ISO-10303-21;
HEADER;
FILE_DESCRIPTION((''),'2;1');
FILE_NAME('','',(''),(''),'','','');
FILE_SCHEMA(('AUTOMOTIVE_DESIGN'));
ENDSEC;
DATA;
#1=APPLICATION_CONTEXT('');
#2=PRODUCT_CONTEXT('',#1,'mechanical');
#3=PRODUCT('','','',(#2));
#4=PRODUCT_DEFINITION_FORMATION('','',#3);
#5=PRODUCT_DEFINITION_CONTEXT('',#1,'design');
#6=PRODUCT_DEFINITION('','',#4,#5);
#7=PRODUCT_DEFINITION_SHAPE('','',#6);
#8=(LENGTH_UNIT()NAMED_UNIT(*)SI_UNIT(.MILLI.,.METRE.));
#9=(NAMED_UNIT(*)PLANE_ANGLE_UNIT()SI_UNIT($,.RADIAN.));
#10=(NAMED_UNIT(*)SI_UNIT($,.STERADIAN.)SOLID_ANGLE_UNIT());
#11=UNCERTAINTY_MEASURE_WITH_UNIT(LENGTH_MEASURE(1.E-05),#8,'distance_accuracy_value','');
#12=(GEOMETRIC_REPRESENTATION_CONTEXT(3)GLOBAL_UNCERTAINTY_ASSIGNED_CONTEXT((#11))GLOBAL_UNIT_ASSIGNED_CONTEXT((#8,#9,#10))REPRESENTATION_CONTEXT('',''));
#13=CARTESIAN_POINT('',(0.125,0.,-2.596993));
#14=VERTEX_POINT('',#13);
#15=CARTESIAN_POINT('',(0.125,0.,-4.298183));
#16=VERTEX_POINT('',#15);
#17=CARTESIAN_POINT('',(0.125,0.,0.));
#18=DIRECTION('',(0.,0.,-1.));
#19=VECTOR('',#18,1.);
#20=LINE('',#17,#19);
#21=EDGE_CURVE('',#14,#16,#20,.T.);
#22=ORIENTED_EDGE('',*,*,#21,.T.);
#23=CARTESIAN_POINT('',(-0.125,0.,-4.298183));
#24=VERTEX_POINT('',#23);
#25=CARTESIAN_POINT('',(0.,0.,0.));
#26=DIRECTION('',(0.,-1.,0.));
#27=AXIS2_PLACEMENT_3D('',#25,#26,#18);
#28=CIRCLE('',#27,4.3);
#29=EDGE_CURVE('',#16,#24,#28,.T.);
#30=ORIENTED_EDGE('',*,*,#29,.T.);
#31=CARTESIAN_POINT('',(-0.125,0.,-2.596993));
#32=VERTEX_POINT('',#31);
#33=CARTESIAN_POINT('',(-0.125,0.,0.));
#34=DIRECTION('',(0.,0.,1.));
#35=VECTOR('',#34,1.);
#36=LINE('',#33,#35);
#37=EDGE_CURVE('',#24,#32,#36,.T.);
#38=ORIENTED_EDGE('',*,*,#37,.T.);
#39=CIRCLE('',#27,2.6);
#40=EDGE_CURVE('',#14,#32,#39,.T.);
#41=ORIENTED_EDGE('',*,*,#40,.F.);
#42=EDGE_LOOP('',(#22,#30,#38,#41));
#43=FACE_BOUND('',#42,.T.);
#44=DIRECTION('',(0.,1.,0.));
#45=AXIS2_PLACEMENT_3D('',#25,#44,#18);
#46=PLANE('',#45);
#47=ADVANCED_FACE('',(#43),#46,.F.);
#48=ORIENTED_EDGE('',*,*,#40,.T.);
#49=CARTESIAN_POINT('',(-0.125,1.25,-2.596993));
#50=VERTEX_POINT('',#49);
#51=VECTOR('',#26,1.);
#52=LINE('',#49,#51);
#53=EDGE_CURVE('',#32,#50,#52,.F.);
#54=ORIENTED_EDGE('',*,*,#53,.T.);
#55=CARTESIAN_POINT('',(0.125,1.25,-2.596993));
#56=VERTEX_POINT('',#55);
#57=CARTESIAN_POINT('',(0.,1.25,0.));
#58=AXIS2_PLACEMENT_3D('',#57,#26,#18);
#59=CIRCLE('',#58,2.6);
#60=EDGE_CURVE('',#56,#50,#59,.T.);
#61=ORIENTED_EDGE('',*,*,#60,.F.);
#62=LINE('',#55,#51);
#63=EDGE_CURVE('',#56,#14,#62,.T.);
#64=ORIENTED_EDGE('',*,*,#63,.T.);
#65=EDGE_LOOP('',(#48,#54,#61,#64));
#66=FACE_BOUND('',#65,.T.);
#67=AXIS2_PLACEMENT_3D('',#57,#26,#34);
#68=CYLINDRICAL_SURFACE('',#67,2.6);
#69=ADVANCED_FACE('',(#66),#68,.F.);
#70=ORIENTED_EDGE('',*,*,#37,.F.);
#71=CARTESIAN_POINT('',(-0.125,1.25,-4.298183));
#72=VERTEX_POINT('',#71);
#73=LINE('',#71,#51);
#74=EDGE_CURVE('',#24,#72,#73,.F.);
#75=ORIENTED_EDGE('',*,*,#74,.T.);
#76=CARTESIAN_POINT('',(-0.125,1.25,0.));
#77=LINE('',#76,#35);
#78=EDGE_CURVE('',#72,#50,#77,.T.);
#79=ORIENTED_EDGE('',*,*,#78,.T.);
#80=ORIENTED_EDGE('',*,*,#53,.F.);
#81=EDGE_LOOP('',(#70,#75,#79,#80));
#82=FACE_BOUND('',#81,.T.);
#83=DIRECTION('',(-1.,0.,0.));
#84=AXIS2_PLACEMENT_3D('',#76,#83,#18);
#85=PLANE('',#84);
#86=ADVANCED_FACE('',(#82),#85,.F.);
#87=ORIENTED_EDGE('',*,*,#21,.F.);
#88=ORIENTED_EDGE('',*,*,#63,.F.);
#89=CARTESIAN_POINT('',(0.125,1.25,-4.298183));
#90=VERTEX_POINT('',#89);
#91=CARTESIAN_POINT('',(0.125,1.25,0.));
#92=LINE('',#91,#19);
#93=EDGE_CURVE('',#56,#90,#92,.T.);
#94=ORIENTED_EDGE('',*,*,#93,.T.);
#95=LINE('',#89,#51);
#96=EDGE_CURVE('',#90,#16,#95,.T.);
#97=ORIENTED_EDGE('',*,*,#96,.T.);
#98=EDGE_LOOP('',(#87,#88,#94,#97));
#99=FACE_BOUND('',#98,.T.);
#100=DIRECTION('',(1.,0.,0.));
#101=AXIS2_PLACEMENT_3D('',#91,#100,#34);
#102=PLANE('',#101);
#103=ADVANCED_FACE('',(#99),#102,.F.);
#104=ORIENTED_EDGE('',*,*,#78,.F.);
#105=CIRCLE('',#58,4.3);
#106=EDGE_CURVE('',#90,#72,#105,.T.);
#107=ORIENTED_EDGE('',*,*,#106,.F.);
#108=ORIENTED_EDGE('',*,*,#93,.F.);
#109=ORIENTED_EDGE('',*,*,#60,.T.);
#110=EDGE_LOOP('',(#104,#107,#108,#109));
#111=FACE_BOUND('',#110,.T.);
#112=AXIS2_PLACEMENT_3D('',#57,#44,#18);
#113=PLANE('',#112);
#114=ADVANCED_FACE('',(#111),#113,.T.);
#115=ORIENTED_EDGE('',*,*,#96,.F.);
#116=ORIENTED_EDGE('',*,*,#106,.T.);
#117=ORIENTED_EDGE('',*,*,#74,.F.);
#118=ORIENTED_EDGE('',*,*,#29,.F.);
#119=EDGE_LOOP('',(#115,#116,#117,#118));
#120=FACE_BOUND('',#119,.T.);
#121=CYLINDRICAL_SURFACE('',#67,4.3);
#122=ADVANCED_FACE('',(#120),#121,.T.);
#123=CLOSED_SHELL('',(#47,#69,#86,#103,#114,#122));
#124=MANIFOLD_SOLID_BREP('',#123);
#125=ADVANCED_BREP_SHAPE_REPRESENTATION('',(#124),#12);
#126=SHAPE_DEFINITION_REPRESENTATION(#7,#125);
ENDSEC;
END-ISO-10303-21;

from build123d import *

# Parameters (mm, degrees)
SKETCH1_R               = 4.3
SKETCH1_R_2             = 2.6
BOSS_EXTRUDE1_DEPTH     = 1.25
SKETCH2_W               = 0.25
SKETCH2_H               = 4.3
CUT_EXTRUDE1_DEPTH      = 7.208260626
BODY_MOVE_COPY1_DEPTH   = 1.25
BODY_MOVE_COPY1_2_DEPTH = 1.25


# Read off the part's stored shape, not the designer's step: Body-Move/Copy1
with BuildPart() as part:
    # Sketch1 → Boss-Extrude1 (new body)
    with BuildSketch(Plane(origin=(0, 0, 0), x_dir=(1, 0, 0), z_dir=(0, 1, 0))):
        with Locations(Location((0, 0, 0), (0, 0, 270))):
            Circle(SKETCH1_R)
        with Locations(Location((0, 0, 0), (0, 0, 270))):
            Circle(SKETCH1_R_2, mode=Mode.SUBTRACT)
    extrude(amount=BOSS_EXTRUDE1_DEPTH)

    # Sketch2 → Cut-Extrude1 (cut, through all)
    with BuildSketch(Plane.XZ):
        with Locations((0, 2.15)):
            Rectangle(SKETCH2_W, SKETCH2_H)
    extrude(amount=-CUT_EXTRUDE1_DEPTH, mode=Mode.SUBTRACT)

    # Body-Move/Copy1 outline → Body-Move/Copy1 (cut)
    with BuildSketch(Plane(origin=(0, 0, 0), x_dir=(1, 0, 0), z_dir=(0, 1, 0))):
        with BuildLine():
            Line((0.125, 2.596993454), (0.125, 4.298182756))
            ThreePointArc((0.125, 4.298182756), (0, 4.3), (-0.125, 4.298182756))
            Line((-0.125, 4.298182756), (-0.125, 2.596993454))
            ThreePointArc((-0.125, 2.596993454), (0, 2.6), (0.125, 2.596993454))
        make_face()
    extrude(amount=BODY_MOVE_COPY1_DEPTH, mode=Mode.SUBTRACT)

    # Body-Move_Copy1 2 outline → Body-Move_Copy1 2 (add)
    with BuildSketch(Plane(origin=(0, 0, 0), x_dir=(1, 0, 0), z_dir=(0, 1, 0))):
        with BuildLine():
            ThreePointArc((-0.125, -4.298182756), (0, -4.3), (0.125, -4.298182756))
            Line((0.125, -4.298182756), (0.125, -2.596993454))
            ThreePointArc((0.125, -2.596993454), (0, -2.6), (-0.125, -2.596993454))
            Line((-0.125, -2.596993454), (-0.125, -4.298182756))
        make_face()
    extrude(amount=BODY_MOVE_COPY1_2_DEPTH)


solid = part.part
